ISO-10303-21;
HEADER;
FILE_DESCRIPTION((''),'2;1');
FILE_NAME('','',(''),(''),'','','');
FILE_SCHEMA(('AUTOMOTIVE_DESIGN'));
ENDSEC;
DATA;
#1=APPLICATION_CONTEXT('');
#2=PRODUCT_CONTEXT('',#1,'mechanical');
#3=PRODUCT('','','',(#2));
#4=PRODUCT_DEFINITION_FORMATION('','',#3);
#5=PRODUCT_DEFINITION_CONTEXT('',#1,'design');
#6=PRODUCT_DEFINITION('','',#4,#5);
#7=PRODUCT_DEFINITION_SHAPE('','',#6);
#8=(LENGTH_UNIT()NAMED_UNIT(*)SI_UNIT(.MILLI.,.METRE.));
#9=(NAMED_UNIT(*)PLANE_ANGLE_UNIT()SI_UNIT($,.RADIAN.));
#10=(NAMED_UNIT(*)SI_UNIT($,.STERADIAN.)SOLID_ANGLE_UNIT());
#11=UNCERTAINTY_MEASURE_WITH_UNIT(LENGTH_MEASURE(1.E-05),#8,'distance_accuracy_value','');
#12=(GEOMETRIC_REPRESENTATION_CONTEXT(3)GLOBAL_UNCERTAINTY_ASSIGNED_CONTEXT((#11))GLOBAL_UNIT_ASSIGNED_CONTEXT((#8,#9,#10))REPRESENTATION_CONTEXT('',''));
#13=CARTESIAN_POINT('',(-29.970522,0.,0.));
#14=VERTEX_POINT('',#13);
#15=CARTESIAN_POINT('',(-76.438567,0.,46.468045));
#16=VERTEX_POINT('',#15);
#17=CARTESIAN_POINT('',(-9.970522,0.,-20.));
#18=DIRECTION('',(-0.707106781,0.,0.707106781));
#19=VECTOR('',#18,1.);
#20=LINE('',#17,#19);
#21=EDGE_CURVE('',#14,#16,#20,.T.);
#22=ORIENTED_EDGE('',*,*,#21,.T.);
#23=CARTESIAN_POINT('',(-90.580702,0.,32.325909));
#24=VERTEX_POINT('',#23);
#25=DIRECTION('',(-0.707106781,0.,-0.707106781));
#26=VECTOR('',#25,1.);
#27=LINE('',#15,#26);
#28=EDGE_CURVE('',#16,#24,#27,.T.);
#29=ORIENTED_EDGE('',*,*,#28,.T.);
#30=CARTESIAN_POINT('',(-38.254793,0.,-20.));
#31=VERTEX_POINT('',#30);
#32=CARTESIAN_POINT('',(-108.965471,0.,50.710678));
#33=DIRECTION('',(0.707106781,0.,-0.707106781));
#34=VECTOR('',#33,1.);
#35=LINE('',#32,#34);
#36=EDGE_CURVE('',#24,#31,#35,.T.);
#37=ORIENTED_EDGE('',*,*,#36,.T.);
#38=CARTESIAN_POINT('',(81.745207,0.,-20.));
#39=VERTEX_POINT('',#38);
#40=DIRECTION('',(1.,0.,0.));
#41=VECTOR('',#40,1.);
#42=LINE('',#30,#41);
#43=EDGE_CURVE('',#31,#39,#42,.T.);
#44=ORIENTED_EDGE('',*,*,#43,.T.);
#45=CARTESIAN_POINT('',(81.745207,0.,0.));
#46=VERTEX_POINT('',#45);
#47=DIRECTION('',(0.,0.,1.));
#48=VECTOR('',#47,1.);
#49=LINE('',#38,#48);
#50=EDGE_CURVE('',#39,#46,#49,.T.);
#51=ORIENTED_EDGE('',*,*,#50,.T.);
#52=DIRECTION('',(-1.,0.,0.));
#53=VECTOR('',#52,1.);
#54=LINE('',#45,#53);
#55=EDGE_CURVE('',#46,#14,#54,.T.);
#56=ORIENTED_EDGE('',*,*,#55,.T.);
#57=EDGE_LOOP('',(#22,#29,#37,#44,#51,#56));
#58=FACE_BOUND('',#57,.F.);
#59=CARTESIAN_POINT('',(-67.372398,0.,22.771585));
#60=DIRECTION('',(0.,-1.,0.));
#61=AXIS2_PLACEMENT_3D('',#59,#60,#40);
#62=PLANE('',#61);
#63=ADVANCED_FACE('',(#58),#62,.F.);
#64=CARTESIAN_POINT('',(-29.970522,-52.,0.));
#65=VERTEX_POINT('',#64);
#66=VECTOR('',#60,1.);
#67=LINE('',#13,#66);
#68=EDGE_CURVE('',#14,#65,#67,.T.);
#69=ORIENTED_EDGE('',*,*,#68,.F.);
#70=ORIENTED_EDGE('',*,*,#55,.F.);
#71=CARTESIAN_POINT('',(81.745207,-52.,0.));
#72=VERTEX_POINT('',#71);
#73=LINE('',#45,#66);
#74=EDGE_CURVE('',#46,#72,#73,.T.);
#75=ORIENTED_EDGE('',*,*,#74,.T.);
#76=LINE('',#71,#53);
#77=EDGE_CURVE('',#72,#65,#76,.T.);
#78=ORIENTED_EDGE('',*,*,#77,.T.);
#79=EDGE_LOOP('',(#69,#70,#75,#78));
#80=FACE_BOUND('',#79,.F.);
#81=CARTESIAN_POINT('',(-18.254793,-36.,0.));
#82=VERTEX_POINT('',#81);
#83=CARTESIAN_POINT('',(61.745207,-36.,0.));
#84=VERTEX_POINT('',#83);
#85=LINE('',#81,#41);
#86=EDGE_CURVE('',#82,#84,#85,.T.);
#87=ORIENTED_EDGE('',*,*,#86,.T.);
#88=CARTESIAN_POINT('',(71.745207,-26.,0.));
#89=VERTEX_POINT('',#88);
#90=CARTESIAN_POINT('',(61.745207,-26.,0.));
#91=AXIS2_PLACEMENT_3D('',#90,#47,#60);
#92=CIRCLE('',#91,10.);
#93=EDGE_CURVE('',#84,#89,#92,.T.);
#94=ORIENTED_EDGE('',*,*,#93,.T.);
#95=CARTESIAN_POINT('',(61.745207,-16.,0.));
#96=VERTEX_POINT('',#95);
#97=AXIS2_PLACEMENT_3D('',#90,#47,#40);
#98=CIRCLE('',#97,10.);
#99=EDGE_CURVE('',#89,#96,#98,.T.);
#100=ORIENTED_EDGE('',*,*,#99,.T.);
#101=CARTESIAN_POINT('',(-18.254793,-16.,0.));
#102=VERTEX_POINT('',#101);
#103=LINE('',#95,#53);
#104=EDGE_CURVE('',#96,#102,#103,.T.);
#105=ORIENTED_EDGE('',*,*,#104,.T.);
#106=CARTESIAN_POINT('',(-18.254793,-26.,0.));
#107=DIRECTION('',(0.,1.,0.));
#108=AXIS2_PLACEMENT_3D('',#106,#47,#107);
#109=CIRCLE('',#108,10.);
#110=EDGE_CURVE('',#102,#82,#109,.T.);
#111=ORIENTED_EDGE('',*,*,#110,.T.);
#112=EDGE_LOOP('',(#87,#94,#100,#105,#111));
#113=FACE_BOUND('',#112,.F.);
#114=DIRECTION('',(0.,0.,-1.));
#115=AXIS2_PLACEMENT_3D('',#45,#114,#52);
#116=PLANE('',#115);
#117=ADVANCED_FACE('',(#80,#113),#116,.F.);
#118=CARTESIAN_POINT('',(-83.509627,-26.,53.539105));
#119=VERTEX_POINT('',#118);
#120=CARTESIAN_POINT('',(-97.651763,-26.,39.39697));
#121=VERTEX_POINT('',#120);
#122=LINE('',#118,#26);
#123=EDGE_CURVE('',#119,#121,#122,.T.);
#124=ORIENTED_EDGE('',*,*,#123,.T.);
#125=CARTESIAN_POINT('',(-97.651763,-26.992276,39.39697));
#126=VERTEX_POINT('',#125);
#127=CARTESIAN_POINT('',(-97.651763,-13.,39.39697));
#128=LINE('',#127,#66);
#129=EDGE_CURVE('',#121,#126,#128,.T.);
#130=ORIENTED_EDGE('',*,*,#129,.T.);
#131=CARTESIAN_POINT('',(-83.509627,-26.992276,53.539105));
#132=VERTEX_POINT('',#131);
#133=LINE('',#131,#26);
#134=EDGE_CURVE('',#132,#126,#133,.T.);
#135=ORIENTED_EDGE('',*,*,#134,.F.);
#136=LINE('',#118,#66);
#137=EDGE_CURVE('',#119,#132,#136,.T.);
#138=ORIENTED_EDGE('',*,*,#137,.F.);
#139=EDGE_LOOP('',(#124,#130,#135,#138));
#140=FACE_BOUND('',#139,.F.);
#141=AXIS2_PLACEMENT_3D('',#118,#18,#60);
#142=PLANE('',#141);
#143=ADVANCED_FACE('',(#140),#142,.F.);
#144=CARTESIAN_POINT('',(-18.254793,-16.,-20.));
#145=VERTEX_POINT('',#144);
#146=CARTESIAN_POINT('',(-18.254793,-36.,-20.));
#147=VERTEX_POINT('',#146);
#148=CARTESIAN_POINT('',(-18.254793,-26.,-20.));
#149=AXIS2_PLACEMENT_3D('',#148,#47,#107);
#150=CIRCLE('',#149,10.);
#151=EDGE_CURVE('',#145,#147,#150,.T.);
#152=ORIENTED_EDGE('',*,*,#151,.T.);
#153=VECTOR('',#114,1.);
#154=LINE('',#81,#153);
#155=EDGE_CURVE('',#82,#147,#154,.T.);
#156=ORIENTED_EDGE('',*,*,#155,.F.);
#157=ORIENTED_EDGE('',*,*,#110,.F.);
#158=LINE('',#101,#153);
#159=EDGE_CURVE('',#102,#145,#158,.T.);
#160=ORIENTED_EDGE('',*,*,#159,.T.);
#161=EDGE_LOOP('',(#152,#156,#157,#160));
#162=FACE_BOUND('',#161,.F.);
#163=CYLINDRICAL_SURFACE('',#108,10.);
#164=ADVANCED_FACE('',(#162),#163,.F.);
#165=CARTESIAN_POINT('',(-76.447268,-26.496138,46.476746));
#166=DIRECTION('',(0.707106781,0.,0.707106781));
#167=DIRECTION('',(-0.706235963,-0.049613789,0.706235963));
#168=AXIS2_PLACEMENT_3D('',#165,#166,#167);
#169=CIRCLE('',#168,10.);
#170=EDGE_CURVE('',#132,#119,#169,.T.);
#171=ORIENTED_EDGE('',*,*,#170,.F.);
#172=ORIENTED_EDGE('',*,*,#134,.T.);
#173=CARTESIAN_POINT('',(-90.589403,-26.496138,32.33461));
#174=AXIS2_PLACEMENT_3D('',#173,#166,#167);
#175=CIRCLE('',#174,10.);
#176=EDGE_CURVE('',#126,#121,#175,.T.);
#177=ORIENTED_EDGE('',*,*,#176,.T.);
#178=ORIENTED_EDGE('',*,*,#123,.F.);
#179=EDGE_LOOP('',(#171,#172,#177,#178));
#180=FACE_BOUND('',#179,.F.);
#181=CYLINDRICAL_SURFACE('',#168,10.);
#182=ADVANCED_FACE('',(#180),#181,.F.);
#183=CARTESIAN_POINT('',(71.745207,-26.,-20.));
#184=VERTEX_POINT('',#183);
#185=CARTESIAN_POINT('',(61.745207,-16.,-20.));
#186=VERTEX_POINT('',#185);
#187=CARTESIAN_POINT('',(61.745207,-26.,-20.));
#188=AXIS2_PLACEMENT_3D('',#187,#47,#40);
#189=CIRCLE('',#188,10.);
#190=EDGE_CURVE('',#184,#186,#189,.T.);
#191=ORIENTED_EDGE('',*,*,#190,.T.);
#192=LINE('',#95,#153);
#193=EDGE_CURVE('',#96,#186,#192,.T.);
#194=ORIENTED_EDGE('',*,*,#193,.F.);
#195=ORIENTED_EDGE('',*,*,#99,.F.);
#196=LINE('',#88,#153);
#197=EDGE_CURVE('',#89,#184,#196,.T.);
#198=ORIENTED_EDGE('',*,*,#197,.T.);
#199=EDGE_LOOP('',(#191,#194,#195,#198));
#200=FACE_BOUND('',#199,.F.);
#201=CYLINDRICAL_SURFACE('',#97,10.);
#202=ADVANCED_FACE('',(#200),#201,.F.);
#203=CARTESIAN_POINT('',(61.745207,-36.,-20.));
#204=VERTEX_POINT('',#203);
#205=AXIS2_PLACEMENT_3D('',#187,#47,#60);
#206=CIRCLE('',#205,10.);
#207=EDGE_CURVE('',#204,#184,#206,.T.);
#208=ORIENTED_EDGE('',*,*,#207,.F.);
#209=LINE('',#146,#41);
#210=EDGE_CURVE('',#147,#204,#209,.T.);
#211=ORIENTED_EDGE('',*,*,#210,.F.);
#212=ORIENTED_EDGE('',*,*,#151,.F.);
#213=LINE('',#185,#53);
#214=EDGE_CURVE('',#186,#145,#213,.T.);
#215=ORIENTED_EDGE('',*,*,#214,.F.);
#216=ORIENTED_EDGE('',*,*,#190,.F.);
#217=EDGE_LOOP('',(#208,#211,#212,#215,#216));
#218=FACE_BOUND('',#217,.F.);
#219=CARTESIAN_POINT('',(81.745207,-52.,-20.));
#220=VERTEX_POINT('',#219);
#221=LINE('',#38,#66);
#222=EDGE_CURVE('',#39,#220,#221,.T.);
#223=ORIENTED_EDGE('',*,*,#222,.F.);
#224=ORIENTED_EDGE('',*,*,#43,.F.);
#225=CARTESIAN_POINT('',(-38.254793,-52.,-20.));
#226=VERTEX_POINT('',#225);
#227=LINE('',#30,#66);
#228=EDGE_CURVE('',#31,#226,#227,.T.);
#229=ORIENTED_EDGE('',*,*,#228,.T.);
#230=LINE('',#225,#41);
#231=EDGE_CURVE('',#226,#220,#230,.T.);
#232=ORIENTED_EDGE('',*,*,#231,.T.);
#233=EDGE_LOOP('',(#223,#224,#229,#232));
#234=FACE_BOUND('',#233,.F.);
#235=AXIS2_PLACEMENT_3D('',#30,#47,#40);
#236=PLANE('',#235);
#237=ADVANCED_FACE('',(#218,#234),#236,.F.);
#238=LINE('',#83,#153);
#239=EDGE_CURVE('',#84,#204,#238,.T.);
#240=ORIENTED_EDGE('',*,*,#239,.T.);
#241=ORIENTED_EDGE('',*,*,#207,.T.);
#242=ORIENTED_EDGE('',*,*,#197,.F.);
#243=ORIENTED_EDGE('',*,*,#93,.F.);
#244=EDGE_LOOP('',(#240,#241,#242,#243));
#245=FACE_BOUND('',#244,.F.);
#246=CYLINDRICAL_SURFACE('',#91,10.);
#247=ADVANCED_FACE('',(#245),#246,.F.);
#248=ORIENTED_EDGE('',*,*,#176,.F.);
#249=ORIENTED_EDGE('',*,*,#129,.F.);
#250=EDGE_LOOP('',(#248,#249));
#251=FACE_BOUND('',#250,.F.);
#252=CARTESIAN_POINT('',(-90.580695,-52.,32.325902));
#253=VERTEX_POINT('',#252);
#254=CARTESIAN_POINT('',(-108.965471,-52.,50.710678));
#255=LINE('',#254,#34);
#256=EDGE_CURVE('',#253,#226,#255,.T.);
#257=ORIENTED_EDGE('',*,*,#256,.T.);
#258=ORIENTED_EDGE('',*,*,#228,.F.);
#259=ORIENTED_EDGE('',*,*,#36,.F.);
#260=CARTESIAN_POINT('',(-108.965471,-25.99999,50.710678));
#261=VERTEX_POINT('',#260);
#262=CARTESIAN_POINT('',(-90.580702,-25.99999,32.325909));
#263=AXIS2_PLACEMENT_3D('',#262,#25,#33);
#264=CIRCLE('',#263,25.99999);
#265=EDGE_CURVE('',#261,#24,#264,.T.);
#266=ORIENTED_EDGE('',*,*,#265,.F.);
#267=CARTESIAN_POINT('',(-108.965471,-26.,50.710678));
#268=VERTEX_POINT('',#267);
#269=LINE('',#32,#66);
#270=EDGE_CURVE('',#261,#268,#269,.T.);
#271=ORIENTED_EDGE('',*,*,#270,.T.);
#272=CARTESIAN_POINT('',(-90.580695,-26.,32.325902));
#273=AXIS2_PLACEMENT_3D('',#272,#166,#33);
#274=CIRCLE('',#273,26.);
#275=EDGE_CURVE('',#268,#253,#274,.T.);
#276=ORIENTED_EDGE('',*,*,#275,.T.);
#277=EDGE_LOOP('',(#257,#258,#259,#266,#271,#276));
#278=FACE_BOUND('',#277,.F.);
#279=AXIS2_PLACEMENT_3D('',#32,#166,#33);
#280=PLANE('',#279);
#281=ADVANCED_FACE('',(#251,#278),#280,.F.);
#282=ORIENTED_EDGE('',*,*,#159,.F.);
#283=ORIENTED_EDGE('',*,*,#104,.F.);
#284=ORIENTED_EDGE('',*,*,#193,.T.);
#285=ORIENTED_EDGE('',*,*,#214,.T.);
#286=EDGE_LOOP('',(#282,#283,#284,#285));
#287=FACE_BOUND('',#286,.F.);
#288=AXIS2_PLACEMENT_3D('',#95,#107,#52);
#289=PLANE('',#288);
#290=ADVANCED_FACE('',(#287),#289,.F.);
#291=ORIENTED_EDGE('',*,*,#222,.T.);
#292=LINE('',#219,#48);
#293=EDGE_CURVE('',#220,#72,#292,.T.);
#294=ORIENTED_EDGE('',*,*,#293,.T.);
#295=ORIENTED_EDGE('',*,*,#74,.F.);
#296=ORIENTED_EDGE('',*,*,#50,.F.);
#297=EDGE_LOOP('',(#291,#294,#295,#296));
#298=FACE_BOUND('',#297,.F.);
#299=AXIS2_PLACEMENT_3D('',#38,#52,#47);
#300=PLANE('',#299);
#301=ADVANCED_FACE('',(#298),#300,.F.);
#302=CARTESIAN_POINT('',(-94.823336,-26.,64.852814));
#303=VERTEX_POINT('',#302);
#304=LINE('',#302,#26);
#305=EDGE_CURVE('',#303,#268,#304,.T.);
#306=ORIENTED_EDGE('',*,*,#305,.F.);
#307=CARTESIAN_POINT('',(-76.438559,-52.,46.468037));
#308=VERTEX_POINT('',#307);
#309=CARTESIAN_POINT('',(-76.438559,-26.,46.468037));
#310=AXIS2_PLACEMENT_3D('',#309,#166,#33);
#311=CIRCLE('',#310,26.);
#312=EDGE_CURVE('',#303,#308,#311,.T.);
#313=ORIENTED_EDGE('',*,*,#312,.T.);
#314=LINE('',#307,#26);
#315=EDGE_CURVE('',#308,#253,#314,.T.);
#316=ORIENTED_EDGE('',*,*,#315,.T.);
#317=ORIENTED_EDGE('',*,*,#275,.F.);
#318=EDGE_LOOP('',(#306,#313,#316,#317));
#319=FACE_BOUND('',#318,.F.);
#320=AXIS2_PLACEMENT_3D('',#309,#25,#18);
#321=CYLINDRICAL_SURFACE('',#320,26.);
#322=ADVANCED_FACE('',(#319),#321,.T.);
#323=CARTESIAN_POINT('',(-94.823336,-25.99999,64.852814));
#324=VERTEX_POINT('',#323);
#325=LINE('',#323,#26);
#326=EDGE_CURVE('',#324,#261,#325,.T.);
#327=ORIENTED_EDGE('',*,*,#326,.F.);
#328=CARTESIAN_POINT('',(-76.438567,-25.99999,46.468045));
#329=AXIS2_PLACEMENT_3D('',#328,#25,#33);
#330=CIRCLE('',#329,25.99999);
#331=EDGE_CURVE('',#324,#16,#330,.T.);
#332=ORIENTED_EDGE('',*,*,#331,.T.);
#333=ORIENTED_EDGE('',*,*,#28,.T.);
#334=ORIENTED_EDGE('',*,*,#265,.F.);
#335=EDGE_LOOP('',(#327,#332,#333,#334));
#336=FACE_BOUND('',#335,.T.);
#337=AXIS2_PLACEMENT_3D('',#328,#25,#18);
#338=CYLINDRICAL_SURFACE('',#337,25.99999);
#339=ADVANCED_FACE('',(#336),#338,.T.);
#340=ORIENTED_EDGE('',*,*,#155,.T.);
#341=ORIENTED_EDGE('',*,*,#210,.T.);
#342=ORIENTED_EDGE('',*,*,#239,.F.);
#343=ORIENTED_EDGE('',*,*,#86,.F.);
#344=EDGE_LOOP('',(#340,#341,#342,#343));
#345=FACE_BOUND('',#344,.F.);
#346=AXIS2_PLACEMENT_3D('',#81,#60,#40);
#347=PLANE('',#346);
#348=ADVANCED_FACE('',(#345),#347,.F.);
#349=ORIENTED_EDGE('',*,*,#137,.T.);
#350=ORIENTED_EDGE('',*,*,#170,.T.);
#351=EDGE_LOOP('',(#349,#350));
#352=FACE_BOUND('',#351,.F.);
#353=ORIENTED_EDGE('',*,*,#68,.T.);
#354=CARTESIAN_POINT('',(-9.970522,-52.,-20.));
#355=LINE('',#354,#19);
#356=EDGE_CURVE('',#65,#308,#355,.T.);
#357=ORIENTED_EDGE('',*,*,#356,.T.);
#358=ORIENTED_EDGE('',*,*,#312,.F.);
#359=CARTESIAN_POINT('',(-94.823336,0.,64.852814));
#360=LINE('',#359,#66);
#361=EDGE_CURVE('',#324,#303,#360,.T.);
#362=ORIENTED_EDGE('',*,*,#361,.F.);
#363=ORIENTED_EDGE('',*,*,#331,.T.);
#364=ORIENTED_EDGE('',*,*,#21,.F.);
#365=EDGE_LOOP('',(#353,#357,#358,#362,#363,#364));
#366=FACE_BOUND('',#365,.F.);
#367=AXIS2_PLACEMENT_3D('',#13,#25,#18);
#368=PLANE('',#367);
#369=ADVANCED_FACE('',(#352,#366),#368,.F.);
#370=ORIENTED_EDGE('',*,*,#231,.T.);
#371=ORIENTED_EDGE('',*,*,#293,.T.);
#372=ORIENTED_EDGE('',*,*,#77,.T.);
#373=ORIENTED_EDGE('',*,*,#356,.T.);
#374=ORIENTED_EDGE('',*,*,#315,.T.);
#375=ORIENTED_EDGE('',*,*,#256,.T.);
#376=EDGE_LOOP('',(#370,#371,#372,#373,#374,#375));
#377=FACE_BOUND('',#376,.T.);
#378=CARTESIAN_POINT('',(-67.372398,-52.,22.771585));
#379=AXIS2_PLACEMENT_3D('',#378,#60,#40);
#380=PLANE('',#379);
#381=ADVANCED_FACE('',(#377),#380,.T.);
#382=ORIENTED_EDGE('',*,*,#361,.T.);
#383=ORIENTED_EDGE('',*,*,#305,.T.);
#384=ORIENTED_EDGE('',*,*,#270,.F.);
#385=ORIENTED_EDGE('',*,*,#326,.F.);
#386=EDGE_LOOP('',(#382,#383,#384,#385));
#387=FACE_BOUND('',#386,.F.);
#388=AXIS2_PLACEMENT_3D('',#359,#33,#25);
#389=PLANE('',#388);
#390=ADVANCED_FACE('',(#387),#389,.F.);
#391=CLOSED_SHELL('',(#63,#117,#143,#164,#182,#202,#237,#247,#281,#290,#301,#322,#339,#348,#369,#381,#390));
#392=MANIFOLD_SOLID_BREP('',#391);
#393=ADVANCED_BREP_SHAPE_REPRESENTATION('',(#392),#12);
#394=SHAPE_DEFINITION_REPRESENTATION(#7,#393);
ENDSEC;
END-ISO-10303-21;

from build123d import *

# Parameters (mm, degrees)
F1_DEPTH = 52
F3_DEPTH = 20
F5_DEPTH = 25
F6_R     = 26
F7_R     = 25.99999


# Not quite as in the source:
# - a fillet or chamfer is up to 0.001 mm smaller than in the source, because OpenCascade refuses the exact size


with BuildPart() as f1:
    # F0 (on Front) → F1 (new body)
    with BuildSketch(Plane.XZ):
        Polygon((-38.2547932683, -20), (-38.2547932683, 0), (-35.5326342583, 0), (-29.9705220208, 0), (-94.8233357632, 64.8528137424), (-108.9654713869, 50.7106781187), align=None)
        Polygon((-35.5326342583, 0), (-38.2547932683, 0), (-38.2547932683, -20), (-9.9705220208, -20), (-29.9705220208, 0), align=None)
        Polygon((81.7452067317, 0), (-29.9705220208, 0), (-9.9705220208, -20), (81.7452067317, -20), align=None)
    extrude(amount=F1_DEPTH)

    # F2 (on face) → F3 (cut)
    with BuildSketch(Plane.XY):
        with BuildLine():
            Line((-18.2547932683, -36), (61.7452067317, -36))
            ThreePointArc((61.7452067317, -36), (68.8162745436, -33.0710678119), (71.7452067317, -26))
            ThreePointArc((71.7452067317, -26), (68.8162745436, -18.9289321881), (61.7452067317, -16))
            Line((61.7452067317, -16), (-18.2547932683, -16))
            ThreePointArc((-18.2547932683, -16), (-28.2547932683, -26), (-18.2547932683, -36))
        make_face()
    extrude(amount=-F3_DEPTH, mode=Mode.SUBTRACT)

    # F4 (on face) → F5 (cut)
    with BuildSketch(Plane(origin=(-14.9852610104, 0, -14.9852610104), x_dir=(0, 1, 0), z_dir=(0.7071067812, 0, 0.7071067812))):
        with BuildLine():
            ThreePointArc((-16.4961378883, 86.9204033326), (-19.2517821929, 93.8138285014), (-26, 96.9080881091))
            Line((-26, 96.9080881091), (-26.9922757766, 96.9080881091))
            ThreePointArc((-26.9922757766, 96.9080881091), (-33.3895630572, 79.6760476372), (-16.4961378883, 86.9204033326))
        make_face()
    extrude(amount=-F5_DEPTH, mode=Mode.SUBTRACT)

    # F6
    f6_edges = [f1.edges().sort_by_distance(p)[0] for p in [
        (-101.894404, -52, 57.781746),
    ]]
    fillet(f6_edges, radius=F6_R)

    # F7 (radius 26 in the source; OpenCascade refuses exactly that, so slightly less here)
    f7_edges = [f1.edges().sort_by_distance(p)[0] for p in [
        (-101.894404, 0, 57.781746),
    ]]
    fillet(f7_edges, radius=F7_R)


solid = f1.part
